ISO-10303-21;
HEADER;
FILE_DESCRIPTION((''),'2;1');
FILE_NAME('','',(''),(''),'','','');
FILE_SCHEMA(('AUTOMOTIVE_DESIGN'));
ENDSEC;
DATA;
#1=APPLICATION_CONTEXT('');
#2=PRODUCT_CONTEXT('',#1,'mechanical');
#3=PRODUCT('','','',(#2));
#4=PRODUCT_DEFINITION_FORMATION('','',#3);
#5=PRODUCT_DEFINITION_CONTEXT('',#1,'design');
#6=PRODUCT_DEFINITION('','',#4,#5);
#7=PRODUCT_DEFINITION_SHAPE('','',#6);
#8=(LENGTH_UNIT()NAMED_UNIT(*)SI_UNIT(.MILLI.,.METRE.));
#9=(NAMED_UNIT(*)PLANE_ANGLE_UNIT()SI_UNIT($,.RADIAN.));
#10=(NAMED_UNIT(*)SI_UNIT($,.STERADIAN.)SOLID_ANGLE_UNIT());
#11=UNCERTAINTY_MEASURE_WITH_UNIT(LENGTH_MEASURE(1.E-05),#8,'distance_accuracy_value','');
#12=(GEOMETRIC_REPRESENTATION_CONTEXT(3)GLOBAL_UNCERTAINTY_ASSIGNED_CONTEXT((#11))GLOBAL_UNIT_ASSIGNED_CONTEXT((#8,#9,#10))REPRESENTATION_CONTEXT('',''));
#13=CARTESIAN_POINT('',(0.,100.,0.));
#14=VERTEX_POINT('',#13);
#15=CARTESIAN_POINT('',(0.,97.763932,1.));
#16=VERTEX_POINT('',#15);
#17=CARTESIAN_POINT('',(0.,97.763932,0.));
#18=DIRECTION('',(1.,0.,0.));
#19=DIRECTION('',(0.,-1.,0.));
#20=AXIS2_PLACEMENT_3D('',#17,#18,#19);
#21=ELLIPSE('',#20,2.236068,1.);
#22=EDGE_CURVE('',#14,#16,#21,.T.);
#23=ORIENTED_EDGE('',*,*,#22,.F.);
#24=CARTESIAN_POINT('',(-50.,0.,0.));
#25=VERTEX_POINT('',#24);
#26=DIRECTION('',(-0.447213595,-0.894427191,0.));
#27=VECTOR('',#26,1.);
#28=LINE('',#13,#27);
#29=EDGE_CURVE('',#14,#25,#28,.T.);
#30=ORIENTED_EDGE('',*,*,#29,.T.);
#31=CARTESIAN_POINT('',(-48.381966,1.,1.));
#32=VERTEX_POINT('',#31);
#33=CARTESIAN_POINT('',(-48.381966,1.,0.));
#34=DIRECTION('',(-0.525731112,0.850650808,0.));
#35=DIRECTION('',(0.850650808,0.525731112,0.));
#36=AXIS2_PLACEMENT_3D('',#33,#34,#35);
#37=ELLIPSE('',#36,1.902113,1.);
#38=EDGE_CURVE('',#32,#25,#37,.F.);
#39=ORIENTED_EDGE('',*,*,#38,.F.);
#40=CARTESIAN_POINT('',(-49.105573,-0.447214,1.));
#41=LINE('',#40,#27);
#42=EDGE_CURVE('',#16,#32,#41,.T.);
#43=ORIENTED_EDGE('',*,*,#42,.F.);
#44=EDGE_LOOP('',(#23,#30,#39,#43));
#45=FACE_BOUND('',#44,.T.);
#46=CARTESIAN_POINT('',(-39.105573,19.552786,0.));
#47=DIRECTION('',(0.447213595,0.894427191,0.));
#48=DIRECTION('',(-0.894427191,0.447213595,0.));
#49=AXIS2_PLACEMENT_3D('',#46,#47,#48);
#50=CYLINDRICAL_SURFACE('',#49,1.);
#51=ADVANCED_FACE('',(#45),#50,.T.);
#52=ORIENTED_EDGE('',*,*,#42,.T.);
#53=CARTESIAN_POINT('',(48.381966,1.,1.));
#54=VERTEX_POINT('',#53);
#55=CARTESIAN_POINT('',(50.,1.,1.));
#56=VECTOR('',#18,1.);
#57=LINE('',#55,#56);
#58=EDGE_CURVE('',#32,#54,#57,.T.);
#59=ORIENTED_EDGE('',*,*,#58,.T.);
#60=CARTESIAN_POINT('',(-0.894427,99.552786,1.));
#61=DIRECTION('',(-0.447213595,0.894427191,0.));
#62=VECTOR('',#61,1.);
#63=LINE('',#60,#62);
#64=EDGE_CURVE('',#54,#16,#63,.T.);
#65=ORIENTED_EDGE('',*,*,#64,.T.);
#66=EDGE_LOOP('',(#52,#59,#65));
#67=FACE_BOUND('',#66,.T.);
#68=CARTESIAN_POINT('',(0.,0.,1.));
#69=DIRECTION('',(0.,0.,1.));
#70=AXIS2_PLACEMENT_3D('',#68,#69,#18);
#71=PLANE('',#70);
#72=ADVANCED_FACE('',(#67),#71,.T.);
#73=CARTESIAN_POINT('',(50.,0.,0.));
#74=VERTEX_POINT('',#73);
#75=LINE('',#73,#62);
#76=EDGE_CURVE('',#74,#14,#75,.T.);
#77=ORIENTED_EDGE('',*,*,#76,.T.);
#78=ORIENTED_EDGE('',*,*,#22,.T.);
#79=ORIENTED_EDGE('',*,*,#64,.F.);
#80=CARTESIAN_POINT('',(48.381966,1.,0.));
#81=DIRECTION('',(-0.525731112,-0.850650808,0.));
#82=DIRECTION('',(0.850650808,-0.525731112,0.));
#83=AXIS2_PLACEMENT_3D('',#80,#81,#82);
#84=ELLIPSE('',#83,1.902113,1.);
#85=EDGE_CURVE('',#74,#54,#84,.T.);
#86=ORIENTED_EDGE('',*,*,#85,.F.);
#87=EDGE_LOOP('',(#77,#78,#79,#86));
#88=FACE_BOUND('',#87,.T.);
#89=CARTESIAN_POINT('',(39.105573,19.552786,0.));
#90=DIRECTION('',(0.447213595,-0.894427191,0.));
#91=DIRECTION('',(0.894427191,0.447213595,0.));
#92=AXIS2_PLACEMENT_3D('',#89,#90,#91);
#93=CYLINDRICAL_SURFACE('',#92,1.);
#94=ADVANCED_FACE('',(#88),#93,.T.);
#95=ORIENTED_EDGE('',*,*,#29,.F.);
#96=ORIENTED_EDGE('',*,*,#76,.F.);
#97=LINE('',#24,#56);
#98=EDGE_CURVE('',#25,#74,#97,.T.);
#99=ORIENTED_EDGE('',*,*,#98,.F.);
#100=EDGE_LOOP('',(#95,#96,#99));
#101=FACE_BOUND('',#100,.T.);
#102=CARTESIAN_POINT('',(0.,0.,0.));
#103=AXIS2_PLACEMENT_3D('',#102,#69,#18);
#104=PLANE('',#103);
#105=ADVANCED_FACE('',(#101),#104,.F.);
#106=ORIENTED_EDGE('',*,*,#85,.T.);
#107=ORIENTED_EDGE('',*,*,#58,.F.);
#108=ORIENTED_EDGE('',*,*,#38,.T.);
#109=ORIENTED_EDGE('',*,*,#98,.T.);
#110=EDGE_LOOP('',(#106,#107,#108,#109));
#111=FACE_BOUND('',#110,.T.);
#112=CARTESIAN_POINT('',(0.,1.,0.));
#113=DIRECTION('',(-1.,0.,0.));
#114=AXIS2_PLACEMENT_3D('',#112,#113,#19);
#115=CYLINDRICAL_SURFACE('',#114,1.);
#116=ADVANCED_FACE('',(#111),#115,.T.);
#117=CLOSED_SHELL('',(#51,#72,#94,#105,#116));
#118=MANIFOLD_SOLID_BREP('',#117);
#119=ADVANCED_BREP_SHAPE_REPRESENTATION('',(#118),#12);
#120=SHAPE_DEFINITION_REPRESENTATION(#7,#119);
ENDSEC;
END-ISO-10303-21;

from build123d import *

# Parameters (mm, degrees)
BOSS_EXTRUDE1_DEPTH = 1
FILLET1_R           = 1


with BuildPart() as part:
    # Sketch1 → Boss-Extrude1 (new body)
    with BuildSketch(Plane.XY):
        Polygon((-50, 0), (50, 0), (0, 100), align=None)
    extrude(amount=BOSS_EXTRUDE1_DEPTH)

    # Fillet1
    fillet1_edges = [part.edges().sort_by_distance(p)[0] for p in [
        (0, 0, 1),
        (-25, 50, 1),
        (25, 50, 1),
    ]]
    fillet(fillet1_edges, radius=FILLET1_R - 0.0001)  # a hair under: the kernel refuses the full size


solid = part.part
